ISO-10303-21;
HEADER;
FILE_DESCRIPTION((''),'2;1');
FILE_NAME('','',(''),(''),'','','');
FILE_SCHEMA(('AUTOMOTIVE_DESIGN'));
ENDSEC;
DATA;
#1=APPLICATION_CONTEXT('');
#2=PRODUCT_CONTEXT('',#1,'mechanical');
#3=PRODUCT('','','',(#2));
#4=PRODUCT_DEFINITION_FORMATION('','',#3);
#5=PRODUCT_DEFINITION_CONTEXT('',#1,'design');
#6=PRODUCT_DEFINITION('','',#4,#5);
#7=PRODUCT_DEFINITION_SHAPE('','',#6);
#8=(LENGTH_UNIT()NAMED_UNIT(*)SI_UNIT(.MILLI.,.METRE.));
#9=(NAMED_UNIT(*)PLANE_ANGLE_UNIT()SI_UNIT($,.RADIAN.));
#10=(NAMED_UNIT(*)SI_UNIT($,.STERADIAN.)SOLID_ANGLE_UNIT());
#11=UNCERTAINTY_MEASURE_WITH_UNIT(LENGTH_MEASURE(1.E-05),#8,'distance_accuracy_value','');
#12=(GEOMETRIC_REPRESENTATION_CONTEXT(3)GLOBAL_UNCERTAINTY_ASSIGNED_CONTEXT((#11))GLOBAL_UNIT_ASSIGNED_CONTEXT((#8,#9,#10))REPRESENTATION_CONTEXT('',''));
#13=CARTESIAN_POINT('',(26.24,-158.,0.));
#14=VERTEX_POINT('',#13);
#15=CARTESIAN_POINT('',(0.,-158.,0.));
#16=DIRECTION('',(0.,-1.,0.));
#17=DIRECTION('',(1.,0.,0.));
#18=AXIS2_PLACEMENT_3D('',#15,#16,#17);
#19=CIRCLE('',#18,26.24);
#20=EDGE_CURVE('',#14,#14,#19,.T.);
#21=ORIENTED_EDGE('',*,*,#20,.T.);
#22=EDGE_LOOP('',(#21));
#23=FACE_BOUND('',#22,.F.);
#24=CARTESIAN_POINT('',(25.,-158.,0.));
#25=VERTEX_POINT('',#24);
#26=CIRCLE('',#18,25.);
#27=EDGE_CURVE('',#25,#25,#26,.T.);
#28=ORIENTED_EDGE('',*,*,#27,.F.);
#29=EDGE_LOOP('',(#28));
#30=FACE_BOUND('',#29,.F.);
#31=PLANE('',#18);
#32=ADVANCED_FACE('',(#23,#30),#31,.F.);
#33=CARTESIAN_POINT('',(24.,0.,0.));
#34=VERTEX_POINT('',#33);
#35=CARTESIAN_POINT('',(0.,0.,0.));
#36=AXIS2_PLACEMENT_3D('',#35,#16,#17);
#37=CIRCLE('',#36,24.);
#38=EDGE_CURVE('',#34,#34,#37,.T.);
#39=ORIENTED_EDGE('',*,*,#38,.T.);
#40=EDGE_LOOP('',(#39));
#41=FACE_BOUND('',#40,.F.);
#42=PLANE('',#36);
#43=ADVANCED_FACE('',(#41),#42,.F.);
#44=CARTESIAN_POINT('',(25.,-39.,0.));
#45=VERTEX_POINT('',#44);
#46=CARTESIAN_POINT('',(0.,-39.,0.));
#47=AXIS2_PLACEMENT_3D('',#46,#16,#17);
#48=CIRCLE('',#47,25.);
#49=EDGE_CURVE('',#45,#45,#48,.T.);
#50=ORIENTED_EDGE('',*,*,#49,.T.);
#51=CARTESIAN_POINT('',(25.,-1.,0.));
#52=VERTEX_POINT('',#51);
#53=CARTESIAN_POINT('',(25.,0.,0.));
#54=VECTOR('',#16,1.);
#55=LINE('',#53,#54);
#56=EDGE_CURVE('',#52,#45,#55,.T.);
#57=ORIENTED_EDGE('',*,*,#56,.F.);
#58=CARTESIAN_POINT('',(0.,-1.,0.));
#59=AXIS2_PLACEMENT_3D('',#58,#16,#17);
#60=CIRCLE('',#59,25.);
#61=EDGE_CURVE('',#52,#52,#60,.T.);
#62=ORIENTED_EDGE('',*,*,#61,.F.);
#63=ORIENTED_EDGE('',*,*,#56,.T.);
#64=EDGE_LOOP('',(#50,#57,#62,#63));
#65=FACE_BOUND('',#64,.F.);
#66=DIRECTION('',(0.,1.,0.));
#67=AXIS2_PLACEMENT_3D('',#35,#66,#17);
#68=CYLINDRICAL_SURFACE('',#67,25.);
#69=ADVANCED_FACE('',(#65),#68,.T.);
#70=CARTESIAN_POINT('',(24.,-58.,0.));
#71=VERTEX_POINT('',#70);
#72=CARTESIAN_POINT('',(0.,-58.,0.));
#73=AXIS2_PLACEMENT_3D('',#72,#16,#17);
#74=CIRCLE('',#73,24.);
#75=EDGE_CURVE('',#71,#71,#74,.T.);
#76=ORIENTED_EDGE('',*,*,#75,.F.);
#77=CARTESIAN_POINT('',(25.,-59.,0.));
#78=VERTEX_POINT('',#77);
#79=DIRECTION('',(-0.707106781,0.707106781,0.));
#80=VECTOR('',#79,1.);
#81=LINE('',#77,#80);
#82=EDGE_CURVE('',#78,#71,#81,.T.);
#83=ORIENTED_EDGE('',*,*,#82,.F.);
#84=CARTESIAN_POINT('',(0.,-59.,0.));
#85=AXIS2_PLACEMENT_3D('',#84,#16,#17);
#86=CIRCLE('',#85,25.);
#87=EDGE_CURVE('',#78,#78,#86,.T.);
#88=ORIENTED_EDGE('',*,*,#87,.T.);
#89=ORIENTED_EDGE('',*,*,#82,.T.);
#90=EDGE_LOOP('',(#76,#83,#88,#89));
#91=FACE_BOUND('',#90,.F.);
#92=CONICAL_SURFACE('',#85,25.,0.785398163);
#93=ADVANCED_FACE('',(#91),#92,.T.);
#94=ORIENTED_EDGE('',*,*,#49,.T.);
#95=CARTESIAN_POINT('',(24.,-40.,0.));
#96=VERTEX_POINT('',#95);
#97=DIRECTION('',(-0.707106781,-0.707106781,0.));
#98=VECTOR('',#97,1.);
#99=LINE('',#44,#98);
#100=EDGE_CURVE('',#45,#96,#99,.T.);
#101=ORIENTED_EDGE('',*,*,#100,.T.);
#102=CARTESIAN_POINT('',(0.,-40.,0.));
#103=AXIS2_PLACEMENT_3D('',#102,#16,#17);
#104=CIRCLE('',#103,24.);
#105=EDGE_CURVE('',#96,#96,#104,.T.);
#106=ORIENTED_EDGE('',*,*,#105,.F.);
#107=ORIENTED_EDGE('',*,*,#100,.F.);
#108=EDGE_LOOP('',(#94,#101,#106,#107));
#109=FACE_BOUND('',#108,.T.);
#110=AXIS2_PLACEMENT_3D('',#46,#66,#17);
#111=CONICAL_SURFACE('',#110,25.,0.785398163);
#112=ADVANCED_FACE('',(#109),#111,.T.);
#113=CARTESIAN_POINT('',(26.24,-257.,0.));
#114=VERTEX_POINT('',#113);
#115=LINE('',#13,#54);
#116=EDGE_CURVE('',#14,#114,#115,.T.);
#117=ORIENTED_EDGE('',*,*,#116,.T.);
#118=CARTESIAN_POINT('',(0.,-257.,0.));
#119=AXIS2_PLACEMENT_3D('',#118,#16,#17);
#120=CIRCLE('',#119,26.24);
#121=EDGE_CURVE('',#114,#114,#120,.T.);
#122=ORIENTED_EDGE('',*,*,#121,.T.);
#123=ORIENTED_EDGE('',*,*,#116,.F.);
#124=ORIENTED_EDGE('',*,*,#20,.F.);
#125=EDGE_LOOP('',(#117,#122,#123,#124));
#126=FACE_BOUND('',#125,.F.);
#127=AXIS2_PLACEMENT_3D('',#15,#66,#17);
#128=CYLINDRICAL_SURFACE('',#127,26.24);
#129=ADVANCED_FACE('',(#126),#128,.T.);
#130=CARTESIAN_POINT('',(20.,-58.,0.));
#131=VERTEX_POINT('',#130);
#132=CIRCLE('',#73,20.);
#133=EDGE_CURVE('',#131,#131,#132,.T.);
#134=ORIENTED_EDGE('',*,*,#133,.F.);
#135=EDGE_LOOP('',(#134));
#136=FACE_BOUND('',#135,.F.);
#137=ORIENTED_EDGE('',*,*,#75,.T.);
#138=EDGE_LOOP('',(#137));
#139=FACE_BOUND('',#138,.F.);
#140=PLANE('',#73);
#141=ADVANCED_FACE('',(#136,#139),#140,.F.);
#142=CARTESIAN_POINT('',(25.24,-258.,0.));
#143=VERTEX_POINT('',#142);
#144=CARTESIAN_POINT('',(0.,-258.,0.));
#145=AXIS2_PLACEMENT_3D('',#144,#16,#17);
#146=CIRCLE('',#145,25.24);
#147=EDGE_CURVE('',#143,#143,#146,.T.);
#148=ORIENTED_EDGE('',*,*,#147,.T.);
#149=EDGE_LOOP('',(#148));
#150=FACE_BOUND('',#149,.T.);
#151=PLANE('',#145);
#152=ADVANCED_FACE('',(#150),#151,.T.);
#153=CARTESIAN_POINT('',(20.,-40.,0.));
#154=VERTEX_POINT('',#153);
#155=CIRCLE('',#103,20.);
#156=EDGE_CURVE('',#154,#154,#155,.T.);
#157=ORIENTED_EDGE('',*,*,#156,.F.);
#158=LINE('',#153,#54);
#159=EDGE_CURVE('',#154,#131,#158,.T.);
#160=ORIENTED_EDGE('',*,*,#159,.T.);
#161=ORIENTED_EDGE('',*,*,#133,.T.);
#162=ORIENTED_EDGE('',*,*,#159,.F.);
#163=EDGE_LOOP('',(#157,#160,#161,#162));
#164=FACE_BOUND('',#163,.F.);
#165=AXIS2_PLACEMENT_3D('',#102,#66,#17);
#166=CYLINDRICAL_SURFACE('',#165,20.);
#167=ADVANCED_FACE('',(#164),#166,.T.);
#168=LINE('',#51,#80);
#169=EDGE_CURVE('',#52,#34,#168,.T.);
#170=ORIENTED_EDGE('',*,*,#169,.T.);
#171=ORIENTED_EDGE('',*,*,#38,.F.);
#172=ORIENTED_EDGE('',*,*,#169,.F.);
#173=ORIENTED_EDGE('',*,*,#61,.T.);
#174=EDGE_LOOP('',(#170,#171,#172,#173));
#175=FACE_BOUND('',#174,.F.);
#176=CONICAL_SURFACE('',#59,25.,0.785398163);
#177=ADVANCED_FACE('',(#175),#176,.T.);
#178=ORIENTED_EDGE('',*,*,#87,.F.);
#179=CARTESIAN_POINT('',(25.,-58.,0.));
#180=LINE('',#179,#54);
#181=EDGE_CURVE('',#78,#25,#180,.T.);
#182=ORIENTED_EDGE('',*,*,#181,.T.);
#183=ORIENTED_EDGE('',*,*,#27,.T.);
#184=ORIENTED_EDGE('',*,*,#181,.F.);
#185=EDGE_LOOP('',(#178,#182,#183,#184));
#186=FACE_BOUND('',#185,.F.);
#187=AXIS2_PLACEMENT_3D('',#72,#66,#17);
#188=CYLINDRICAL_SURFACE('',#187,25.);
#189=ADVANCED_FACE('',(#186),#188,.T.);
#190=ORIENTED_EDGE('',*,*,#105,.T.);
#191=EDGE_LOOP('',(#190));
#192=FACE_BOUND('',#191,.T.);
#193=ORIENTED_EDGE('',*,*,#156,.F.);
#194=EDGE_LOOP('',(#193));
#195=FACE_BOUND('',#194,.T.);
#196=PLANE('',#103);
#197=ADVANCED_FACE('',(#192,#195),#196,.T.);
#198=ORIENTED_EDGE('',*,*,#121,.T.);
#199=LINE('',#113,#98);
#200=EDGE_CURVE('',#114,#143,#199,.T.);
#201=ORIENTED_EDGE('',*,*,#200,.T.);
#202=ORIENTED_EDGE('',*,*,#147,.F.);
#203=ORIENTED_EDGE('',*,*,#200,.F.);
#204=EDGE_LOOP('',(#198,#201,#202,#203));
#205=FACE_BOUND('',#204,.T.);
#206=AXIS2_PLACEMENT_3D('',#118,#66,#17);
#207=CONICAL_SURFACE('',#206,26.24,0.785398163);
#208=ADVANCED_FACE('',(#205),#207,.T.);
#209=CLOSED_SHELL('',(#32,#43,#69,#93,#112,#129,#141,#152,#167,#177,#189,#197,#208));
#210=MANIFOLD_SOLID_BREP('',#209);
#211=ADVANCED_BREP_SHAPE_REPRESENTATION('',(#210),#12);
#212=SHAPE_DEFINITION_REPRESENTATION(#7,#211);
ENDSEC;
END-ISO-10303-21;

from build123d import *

# Parameters (mm, degrees)
F0_R     = 25
F1_DEPTH = 40
F2_R     = 20
F3_DEPTH = 18
F4_SIZE  = 1
F5_R     = 25
F6_DEPTH = 100
F7_SIZE  = 1
F8_R     = 26.24
F9_DEPTH = 100
F10_SIZE = 1


with BuildPart() as f1:
    # F0 (on Front) → F1 (new body)
    with BuildSketch(Plane.XZ):
        Circle(F0_R)
    extrude(amount=F1_DEPTH)

    # F2 (on face) → F3 (join)
    with BuildSketch(Plane.XZ.offset(40)):
        Circle(F2_R)
    extrude(amount=F3_DEPTH)

    # F4
    f4_edges = [f1.edges().sort_by_distance(p)[0] for p in [
        (-25, -40, 0),
        (-25, 0, 0),
    ]]
    chamfer(f4_edges, length=F4_SIZE)

    # F5 (on face) → F6 (join)
    with BuildSketch(Plane.XZ.offset(58)):
        Circle(F5_R)
    extrude(amount=F6_DEPTH)

    # F7
    f7_edges = [f1.edges().sort_by_distance(p)[0] for p in [
        (-25, -58, 0),
    ]]
    chamfer(f7_edges, length=F7_SIZE)

    # F8 (on face) → F9 (join)
    with BuildSketch(Plane.XZ.offset(158)):
        Circle(F8_R)
    extrude(amount=F9_DEPTH)

    # F10
    f10_edges = [f1.edges().sort_by_distance(p)[0] for p in [
        (-26.24, -258, 0),
    ]]
    chamfer(f10_edges, length=F10_SIZE)


solid = f1.part
